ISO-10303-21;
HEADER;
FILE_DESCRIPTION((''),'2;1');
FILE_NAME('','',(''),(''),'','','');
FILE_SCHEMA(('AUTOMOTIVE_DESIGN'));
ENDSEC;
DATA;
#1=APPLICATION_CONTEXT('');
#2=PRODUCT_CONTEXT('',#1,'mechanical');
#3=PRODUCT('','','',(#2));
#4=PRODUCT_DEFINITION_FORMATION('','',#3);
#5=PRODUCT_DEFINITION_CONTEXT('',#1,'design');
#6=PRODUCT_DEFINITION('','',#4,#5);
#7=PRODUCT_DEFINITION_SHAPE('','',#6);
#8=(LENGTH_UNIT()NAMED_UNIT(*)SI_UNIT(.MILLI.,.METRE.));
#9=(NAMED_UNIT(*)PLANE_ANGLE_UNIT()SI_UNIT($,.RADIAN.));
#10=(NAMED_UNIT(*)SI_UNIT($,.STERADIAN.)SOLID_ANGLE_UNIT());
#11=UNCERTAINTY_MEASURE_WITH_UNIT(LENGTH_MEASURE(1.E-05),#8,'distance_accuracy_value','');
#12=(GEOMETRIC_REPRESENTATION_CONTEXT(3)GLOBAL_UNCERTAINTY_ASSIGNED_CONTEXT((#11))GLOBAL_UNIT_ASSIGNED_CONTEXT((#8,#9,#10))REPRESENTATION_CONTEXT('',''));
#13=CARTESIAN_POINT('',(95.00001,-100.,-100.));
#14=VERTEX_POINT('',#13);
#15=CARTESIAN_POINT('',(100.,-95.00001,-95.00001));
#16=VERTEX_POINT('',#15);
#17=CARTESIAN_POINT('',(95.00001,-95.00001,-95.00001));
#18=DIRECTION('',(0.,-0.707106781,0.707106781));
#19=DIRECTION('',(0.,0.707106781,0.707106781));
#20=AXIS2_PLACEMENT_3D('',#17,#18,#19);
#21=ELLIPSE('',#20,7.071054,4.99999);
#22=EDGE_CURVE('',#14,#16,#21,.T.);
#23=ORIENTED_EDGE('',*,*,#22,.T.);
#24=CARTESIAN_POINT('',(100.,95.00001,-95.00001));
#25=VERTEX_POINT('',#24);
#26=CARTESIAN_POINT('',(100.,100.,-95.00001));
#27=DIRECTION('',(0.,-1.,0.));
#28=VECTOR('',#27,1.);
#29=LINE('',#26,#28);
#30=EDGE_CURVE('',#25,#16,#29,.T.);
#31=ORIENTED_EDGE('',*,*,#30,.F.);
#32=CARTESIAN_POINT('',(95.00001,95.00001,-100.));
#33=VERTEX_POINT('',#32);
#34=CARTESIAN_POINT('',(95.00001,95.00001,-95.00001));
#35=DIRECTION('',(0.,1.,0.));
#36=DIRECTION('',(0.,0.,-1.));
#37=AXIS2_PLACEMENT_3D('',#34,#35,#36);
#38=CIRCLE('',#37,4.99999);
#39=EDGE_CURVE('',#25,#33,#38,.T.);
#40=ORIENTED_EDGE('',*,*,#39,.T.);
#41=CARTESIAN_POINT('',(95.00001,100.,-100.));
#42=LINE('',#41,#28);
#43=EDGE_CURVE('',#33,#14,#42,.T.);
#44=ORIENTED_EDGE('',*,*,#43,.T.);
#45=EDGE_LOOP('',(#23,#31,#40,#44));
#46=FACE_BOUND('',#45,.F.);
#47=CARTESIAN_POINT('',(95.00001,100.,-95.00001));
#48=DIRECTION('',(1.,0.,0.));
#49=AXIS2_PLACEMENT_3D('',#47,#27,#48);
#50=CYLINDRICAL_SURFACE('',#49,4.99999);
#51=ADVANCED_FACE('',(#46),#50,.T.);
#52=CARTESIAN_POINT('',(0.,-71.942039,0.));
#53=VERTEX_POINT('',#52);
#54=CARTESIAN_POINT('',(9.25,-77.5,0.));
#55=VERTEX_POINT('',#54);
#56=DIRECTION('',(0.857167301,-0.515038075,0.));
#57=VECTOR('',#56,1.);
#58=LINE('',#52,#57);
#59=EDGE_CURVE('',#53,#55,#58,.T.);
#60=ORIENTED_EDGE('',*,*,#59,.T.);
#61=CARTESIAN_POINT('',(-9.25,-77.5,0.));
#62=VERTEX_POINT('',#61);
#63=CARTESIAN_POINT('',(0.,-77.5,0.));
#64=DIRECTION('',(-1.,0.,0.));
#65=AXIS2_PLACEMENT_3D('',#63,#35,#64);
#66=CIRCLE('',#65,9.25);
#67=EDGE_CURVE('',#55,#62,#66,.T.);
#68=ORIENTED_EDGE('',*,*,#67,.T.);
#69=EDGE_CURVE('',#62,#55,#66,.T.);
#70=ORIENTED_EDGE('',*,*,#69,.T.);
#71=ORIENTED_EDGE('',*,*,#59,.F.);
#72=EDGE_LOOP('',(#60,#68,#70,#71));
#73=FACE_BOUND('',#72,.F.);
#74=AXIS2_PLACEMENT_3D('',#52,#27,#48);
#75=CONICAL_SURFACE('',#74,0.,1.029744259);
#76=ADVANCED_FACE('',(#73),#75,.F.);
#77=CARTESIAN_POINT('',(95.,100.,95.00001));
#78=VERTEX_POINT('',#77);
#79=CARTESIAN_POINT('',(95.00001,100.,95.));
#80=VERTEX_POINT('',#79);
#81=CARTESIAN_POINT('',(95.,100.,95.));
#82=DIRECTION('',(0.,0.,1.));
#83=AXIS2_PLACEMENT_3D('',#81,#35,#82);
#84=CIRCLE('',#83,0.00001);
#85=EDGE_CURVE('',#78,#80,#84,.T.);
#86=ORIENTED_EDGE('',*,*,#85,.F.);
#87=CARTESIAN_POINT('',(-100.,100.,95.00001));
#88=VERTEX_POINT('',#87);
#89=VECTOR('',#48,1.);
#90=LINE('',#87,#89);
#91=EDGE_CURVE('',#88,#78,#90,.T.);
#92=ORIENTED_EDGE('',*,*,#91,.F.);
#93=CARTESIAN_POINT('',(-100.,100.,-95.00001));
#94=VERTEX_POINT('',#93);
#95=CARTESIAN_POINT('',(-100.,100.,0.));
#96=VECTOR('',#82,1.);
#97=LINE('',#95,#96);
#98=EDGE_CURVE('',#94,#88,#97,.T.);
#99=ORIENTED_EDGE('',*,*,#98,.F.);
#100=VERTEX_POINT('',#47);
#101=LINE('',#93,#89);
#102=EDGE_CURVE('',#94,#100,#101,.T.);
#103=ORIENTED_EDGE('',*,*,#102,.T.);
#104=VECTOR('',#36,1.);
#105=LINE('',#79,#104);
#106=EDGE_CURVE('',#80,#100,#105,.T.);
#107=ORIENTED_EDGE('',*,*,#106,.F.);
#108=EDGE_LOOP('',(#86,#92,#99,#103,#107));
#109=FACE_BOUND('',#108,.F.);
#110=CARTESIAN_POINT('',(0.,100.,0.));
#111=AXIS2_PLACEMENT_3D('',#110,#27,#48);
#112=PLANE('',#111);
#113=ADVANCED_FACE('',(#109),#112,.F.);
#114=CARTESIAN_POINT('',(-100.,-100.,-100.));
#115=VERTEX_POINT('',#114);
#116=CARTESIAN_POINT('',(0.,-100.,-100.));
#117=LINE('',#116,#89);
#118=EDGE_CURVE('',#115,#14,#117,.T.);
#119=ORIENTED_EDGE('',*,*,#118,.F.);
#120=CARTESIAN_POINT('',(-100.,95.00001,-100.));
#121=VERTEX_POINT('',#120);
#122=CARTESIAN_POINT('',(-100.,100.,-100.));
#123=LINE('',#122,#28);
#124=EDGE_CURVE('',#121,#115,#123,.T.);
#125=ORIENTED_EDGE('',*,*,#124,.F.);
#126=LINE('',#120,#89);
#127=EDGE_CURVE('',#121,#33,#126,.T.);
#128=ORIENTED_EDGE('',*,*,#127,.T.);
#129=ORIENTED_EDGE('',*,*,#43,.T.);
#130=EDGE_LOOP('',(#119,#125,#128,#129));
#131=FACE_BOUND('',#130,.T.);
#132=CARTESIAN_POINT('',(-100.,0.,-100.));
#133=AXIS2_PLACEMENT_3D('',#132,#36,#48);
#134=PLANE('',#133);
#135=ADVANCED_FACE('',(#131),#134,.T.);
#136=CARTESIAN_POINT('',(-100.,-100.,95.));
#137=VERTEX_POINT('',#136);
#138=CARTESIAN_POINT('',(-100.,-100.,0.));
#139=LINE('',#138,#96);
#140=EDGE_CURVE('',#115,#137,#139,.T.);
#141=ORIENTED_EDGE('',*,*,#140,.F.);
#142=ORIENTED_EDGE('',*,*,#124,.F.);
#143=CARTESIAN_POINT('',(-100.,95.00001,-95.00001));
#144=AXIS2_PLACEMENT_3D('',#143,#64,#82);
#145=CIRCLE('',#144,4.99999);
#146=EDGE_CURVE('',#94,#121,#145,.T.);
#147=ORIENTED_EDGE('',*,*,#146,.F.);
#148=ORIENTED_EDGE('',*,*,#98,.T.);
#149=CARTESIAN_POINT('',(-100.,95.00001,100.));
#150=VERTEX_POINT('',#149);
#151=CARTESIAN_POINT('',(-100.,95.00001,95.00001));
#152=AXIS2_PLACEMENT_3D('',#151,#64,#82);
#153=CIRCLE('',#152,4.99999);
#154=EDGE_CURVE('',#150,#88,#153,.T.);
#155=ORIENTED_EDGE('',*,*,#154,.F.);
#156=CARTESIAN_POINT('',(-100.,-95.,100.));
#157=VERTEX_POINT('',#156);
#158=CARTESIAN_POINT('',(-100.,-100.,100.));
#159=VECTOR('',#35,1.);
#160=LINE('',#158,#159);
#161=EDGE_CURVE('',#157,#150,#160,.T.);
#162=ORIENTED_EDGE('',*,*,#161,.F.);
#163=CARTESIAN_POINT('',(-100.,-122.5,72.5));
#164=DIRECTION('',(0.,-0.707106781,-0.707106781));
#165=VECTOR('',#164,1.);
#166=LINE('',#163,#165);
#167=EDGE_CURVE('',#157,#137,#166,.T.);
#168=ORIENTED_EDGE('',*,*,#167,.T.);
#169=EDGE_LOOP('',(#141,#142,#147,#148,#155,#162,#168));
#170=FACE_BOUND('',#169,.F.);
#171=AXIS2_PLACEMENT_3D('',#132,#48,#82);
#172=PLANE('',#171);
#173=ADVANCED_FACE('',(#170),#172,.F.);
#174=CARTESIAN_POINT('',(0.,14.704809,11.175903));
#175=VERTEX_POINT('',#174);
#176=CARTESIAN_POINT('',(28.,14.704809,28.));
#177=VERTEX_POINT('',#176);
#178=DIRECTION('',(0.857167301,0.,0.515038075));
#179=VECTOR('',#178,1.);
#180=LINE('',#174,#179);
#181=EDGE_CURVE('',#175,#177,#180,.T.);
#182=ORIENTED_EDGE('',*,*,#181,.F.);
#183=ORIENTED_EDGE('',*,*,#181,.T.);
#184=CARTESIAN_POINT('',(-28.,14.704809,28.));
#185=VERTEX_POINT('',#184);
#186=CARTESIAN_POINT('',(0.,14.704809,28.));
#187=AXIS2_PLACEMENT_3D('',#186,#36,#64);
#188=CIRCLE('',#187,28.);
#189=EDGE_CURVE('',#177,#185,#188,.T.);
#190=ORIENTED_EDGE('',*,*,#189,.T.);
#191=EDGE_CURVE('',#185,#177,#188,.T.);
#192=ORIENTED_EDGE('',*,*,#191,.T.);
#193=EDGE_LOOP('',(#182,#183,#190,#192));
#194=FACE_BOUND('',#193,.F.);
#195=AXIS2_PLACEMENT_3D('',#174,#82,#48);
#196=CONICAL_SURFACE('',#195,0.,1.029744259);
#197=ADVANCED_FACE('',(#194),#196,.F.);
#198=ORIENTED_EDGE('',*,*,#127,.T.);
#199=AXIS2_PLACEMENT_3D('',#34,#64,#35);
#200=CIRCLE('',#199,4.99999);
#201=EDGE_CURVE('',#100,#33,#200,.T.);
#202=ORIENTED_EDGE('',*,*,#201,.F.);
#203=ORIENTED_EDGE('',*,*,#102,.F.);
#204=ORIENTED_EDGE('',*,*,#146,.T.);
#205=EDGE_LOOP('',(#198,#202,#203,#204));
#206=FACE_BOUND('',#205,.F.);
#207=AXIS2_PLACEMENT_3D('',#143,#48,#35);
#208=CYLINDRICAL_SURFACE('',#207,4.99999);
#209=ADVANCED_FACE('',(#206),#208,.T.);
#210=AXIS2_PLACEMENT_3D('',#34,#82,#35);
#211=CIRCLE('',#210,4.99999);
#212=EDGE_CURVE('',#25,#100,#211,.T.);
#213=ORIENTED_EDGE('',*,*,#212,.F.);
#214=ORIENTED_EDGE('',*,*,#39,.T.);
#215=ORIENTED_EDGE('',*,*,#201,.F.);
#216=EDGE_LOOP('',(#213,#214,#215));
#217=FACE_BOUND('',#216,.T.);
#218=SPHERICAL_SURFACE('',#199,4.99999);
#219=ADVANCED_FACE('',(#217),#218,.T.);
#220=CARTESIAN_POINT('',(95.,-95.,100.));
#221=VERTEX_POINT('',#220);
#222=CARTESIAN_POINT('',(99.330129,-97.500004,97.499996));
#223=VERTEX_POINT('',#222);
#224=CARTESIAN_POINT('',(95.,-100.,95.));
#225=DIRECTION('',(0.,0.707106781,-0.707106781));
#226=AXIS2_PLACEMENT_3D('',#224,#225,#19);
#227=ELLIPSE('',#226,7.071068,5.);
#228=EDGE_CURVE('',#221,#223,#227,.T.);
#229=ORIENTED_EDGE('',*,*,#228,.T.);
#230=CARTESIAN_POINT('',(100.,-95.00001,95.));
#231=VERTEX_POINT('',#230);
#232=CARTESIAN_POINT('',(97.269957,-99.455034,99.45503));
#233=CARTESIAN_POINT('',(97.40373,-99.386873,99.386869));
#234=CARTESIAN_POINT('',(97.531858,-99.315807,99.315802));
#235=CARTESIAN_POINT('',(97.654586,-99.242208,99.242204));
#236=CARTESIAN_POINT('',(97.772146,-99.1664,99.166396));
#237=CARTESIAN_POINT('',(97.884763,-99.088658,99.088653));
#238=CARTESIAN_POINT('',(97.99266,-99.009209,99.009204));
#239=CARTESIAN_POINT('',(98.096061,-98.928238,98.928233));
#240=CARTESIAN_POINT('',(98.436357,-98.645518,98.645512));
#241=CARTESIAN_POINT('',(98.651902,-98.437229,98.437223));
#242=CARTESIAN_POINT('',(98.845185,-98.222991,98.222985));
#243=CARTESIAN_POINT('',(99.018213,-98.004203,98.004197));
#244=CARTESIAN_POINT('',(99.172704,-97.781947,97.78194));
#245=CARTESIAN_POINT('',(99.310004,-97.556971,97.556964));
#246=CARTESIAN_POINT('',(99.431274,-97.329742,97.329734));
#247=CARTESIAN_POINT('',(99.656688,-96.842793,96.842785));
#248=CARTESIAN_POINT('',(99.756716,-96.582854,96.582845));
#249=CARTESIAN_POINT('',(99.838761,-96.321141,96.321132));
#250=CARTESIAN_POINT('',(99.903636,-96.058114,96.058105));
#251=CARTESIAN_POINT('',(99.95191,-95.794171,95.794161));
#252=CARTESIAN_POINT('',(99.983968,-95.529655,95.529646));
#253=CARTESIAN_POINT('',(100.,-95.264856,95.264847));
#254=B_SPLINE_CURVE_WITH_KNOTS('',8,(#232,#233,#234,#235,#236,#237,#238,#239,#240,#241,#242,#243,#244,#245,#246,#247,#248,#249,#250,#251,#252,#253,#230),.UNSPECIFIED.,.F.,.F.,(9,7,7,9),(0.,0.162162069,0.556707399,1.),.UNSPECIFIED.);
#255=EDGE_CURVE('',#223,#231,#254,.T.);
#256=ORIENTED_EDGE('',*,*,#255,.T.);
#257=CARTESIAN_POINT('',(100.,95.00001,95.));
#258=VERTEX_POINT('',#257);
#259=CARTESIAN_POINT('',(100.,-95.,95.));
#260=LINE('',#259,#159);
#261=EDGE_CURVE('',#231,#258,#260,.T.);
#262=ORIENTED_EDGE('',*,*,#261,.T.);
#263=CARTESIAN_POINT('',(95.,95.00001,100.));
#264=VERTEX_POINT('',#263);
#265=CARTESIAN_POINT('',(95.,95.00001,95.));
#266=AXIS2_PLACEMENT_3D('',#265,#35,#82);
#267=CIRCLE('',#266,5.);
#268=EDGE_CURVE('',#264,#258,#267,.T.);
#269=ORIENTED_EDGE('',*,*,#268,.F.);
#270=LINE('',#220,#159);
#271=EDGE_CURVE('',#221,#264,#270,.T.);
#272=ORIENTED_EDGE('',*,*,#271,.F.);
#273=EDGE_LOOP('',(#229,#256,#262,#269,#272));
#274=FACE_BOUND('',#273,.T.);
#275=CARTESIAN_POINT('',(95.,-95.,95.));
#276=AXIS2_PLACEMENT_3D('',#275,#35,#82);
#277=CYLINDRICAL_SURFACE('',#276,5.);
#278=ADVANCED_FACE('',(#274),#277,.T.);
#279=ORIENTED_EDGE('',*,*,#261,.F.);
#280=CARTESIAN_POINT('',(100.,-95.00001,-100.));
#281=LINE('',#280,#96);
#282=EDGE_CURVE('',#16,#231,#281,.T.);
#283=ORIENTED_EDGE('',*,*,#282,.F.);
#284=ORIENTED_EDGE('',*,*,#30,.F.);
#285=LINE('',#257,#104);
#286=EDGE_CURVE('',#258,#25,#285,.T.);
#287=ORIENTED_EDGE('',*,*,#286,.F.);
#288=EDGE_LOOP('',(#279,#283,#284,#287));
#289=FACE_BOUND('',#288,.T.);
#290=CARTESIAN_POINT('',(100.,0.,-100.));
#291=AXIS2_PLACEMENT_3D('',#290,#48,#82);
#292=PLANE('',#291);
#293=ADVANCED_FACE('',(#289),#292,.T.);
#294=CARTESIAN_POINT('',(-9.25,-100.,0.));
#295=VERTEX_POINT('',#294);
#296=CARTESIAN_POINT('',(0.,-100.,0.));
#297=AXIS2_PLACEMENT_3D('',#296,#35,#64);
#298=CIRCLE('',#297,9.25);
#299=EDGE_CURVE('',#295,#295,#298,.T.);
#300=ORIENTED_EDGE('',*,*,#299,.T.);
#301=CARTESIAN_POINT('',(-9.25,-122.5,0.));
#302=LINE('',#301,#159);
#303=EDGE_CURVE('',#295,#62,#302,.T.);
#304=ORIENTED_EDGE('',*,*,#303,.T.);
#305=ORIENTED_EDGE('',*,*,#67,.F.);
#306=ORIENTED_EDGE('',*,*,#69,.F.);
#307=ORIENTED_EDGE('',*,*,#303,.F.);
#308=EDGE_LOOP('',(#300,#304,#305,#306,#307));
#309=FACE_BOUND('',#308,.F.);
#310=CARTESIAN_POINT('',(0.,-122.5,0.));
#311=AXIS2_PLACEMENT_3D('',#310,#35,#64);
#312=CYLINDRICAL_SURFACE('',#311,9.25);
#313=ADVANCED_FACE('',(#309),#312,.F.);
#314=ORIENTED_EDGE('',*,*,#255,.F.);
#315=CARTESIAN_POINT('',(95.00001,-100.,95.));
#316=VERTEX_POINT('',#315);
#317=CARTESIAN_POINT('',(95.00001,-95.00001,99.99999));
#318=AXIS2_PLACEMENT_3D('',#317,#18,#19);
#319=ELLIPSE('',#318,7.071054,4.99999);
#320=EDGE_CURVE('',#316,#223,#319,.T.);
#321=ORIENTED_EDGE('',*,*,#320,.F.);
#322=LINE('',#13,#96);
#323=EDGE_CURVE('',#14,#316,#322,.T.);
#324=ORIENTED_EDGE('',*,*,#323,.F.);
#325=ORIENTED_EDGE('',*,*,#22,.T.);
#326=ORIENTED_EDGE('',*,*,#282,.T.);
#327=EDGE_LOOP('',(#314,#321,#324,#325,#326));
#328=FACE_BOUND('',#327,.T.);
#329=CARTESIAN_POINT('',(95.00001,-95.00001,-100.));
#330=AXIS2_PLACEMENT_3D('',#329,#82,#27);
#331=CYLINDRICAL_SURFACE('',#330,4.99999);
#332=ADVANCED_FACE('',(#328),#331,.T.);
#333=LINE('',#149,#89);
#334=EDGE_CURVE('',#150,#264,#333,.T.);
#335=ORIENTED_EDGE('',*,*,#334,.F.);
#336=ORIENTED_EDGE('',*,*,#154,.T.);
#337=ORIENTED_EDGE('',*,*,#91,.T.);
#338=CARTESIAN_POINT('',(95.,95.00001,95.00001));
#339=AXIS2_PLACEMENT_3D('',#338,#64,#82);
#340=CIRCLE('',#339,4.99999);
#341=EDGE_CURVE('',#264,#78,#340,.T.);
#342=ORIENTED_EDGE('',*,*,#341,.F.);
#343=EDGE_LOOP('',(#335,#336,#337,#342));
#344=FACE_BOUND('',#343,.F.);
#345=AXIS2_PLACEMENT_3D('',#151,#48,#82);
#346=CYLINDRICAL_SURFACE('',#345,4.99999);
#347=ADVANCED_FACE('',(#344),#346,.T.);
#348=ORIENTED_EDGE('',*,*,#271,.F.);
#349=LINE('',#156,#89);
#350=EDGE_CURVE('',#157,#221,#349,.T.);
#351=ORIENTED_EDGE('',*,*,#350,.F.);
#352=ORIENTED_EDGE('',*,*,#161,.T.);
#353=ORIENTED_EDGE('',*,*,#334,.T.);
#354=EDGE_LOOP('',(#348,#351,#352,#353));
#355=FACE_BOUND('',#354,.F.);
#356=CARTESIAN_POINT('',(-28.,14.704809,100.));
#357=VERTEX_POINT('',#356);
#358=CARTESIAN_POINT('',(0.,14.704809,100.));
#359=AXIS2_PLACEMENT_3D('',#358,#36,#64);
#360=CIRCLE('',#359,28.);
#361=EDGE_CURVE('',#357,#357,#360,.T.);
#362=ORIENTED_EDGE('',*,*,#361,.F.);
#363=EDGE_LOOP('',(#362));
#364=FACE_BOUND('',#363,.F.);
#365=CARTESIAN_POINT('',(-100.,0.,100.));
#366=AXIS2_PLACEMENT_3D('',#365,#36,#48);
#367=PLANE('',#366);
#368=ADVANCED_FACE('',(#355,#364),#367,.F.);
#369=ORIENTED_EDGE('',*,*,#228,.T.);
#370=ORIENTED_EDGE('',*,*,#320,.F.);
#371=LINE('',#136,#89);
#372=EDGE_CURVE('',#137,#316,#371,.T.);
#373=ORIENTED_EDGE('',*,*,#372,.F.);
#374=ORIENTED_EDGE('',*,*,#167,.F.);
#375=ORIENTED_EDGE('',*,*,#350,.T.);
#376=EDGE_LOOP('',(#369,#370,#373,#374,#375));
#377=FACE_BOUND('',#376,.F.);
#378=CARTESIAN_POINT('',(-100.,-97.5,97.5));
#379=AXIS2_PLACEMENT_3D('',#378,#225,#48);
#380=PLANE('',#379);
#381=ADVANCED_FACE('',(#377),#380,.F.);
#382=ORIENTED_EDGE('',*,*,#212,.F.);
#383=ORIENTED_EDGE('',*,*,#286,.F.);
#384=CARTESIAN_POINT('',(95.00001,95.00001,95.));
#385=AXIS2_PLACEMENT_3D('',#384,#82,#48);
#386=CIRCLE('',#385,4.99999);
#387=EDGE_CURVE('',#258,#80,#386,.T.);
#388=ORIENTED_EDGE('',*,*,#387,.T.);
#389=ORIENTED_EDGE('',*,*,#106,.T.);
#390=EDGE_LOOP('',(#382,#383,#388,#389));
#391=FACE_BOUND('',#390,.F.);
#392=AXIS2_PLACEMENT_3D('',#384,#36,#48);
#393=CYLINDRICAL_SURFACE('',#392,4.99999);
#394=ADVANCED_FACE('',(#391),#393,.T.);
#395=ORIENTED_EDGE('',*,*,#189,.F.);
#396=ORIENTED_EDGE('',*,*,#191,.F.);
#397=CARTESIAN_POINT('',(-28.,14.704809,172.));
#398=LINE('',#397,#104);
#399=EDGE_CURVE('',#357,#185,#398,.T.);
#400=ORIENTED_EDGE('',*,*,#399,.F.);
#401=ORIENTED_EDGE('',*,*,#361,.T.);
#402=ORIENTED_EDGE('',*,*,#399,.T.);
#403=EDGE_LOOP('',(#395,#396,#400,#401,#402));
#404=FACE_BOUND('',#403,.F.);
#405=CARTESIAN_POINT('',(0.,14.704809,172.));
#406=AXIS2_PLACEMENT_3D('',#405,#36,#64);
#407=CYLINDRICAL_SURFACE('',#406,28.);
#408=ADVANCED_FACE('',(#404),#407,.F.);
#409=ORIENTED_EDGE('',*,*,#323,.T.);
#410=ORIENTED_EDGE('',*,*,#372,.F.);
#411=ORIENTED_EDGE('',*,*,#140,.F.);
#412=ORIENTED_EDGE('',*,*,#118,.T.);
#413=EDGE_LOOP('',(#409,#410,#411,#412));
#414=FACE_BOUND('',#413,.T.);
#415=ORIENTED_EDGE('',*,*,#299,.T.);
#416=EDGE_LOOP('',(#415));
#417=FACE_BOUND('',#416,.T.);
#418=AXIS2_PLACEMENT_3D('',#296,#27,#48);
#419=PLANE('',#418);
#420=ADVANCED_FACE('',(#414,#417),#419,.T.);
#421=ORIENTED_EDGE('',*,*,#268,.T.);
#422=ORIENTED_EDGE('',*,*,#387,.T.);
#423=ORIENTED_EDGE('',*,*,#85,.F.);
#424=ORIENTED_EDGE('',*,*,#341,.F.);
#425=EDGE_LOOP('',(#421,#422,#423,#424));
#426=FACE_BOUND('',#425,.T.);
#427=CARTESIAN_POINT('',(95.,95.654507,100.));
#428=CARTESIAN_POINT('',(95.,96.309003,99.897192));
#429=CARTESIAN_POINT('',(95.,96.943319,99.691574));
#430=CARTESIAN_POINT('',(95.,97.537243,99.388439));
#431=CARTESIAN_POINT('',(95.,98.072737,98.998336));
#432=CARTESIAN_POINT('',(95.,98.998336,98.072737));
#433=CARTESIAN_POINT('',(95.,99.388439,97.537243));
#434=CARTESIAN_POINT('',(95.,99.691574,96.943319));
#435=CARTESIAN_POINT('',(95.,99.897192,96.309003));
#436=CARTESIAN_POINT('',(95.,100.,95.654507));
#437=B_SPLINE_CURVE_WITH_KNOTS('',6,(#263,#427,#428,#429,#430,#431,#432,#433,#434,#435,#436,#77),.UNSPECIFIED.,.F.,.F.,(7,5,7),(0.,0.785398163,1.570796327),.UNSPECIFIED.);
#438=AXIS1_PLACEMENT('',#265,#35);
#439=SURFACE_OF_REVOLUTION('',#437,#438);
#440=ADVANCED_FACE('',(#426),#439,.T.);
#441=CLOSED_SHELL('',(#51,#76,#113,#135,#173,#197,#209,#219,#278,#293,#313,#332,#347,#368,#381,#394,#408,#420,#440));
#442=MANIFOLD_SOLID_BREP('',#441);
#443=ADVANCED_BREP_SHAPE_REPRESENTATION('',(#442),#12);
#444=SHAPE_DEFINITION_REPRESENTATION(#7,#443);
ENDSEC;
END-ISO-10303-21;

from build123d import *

# Parameters (mm, degrees)
F1_W      = 200
F1_H      = 200
F2_DEPTH  = 100
F4_D      = 18.5
F4_DEPTH  = 22.5
F4_TIP    = 5.557960726
F5_SIZE   = 5
F6_R      = 5
F8_R      = 4.99999
F10_D     = 56
F10_DEPTH = 72
F10_TIP   = 16.8240973328


# Not quite as in the source:
# - a fillet or chamfer is up to 0.001 mm smaller than in the source, because OpenCascade refuses the exact size
# - a feature of the source that left no trace in its solid (it failed there, or was rolled back) is left out


with BuildPart() as f2:
    # F1 (on Front) → F2 (new body, symmetric)
    with BuildSketch(Plane.XZ):
        Rectangle(F1_W, F1_H)
    extrude(amount=F2_DEPTH, both=True)

    # F4
    with Locations(Plane.XZ.offset(100)):
        with Locations((0, 0)):
            Hole(F4_D / 2, depth=F4_DEPTH)
            with Locations((0, 0, -(F4_DEPTH + F4_TIP / 2))):  # 118° drill point
                Cone(0, F4_D / 2, F4_TIP, mode=Mode.SUBTRACT)

    # F5
    f5_edges = [f2.edges().sort_by_distance(p)[0] for p in [
        (0, -100, 100),
    ]]
    chamfer(f5_edges, length=F5_SIZE)

    # F6
    f6_edges = [f2.edges().sort_by_distance(p)[0] for p in [
        (100, 2.5, 100),
    ]]
    fillet(f6_edges, radius=F6_R)

    # F8 (radius 5 in the source; OpenCascade refuses exactly that, so slightly less here)
    f8_edges = [f2.edges().sort_by_distance(p)[0] for p in [
        (0, 100, -100),
        (-2.5, 100, 100),
        (98.535534, 100, 98.535534),
        (100, 100, -2.5),
        (100, -100, -2.5),
        (100, 0, -100),
    ]]
    fillet(f8_edges, radius=F8_R)

    # F10
    with Locations(Plane.XY.offset(100)):
        with Locations((0, 14.7048085928)):
            Hole(F10_D / 2, depth=F10_DEPTH)
            with Locations((0, 0, -(F10_DEPTH + F10_TIP / 2))):  # 118° drill point
                Cone(0, F10_D / 2, F10_TIP, mode=Mode.SUBTRACT)


solid = f2.part
